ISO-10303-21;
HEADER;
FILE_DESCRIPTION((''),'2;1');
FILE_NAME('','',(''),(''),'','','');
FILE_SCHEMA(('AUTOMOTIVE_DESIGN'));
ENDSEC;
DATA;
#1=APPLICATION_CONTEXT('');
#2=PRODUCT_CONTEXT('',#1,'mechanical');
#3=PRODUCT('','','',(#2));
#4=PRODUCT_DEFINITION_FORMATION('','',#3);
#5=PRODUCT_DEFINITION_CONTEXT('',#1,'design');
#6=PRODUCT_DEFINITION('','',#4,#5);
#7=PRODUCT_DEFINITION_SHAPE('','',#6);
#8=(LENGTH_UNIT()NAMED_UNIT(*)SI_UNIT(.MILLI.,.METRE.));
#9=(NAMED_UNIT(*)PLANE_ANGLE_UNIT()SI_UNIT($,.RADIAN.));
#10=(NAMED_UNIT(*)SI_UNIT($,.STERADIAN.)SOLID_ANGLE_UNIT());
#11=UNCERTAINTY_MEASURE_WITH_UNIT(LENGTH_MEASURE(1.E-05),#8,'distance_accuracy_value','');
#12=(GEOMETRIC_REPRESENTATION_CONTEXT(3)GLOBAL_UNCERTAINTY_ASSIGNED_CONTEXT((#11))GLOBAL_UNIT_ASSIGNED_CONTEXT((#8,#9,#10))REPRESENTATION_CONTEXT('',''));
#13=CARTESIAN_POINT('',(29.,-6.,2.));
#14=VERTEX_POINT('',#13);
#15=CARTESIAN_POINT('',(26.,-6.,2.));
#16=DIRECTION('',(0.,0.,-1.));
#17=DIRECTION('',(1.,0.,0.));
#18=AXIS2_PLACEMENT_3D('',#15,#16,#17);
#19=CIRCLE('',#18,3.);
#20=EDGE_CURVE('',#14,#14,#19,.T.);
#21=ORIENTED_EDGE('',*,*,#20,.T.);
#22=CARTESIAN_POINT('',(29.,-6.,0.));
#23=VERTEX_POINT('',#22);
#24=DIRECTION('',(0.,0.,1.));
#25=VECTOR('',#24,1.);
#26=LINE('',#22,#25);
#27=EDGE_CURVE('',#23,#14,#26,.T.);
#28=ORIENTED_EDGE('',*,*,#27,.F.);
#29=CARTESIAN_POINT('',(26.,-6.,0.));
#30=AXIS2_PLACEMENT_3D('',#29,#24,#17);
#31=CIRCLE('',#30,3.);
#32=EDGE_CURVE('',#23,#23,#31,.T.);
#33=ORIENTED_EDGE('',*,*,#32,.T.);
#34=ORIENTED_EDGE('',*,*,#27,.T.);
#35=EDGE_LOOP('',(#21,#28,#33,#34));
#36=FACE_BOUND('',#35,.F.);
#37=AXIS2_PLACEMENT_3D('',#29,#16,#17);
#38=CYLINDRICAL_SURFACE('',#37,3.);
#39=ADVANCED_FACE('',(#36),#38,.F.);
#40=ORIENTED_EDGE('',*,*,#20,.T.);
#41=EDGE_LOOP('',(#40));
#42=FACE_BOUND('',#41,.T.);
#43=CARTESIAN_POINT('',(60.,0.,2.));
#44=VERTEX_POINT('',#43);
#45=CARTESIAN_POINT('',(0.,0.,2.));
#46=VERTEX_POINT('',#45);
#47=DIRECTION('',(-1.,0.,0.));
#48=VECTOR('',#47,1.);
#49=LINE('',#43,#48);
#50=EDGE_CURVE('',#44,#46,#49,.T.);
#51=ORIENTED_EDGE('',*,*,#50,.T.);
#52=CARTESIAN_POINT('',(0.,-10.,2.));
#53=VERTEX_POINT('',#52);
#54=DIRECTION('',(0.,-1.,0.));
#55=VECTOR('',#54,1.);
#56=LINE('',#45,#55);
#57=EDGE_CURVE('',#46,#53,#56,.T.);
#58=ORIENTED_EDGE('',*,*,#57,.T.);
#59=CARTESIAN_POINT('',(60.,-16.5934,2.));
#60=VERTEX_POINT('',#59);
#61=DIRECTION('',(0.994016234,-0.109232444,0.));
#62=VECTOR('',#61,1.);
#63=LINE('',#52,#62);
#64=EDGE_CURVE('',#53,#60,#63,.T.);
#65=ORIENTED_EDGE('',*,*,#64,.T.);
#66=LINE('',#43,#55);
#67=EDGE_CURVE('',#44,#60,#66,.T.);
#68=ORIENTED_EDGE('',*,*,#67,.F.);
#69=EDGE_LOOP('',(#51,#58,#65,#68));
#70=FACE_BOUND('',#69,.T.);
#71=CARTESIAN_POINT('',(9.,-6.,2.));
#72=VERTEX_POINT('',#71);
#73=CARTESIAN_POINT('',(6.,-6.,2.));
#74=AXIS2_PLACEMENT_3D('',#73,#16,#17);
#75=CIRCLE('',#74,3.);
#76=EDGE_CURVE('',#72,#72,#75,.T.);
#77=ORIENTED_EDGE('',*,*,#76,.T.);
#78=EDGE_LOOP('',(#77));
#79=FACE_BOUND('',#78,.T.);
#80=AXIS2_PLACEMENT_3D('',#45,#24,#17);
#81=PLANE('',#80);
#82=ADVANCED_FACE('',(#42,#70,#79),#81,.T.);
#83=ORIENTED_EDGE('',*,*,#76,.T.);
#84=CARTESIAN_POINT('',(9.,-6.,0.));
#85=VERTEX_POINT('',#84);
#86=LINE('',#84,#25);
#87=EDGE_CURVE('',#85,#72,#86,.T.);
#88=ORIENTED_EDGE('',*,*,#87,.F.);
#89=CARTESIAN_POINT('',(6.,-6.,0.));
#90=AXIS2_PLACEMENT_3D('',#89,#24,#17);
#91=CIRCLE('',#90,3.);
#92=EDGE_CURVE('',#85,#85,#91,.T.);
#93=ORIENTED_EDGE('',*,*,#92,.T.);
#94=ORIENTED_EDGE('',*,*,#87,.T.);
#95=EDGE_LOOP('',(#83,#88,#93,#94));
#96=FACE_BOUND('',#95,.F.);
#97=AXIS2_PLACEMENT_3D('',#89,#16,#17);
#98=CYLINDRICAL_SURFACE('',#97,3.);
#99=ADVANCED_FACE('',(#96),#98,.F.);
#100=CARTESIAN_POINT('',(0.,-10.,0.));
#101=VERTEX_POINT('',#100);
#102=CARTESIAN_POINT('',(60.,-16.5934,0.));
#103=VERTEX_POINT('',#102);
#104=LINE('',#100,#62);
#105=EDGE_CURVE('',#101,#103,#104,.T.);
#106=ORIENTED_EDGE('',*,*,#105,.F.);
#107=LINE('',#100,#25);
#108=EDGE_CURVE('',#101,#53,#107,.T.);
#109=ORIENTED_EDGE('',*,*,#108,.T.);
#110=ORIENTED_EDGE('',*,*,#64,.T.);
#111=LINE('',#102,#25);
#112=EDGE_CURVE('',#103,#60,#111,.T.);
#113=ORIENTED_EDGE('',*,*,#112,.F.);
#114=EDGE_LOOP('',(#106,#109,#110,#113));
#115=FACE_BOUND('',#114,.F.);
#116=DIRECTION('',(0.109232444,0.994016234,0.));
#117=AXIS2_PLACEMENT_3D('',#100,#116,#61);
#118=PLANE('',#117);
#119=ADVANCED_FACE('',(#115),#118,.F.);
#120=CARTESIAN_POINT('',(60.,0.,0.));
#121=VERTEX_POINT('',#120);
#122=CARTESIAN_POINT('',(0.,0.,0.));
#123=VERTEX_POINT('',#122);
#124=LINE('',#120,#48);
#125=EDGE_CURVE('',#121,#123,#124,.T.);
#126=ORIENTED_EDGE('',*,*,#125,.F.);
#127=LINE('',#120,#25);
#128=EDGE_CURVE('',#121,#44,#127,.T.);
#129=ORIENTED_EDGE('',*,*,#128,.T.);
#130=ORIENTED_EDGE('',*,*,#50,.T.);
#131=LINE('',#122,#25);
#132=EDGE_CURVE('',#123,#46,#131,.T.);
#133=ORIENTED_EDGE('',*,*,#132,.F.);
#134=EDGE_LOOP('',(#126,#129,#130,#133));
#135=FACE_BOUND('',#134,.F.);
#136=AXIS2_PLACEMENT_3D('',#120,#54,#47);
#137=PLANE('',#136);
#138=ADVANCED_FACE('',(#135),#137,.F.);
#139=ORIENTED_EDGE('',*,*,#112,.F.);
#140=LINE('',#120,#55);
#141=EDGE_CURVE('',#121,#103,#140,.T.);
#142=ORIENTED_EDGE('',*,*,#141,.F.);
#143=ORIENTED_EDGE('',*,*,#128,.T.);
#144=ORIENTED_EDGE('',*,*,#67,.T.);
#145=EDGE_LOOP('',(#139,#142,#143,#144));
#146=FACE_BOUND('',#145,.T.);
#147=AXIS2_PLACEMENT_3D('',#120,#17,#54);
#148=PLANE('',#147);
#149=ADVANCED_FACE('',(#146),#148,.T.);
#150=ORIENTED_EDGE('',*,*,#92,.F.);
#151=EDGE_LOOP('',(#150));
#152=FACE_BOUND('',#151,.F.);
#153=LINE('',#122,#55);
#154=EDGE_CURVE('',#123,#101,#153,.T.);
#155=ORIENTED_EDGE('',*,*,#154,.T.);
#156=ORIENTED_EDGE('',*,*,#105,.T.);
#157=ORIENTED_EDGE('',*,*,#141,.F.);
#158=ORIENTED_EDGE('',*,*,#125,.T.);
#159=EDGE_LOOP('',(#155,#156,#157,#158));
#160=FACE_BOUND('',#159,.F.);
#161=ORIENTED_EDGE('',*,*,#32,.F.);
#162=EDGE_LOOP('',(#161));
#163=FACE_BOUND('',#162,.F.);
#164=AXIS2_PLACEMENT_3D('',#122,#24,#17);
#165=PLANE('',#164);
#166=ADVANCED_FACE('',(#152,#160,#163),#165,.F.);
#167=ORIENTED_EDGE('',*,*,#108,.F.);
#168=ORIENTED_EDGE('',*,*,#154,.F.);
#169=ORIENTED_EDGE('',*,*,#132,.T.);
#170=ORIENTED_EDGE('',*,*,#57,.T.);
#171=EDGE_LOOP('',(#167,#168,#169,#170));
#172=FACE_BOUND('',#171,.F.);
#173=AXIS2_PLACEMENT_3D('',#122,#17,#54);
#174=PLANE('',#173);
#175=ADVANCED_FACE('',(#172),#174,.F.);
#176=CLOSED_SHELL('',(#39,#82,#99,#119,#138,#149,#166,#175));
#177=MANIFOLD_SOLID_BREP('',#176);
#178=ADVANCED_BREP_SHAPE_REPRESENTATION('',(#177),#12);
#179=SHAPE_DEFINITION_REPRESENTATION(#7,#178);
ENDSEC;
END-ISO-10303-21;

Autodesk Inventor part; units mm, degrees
ref_plane "YZ Plane" through (0, 0, 0) normal (1, 0, 0) x (0, 1, 0)
ref_plane "XZ Plane" through (0, 0, 0) normal (0, 1, 0) x (-1, 0, 0)
ref_plane "XY Plane" through (0, 0, 0) normal (0, 0, 1) x (1, 0, 0)
sketch "Sketch1" plane through (0, 0, 0) normal (0, 0, 1) x (1, 0, 0)
  line L0 (60, 0) -> (60, -16.5934)
  line L1 (60, 0) -> (0, 0)
  line L2 (0, 0) -> (0, -10)
  line L3 (0, -10) -> (60, -16.5934)
  dimension "d43" = 10
  dimension "d44" = 60
  dimension "d51" = 6.271
extrude "Plate1" add sketch "Sketch1" along normal blind 2
sketch "Sketch6" plane through (0, 0, 0) normal (0, 0, 1) x (1, 0, 0)
  line L0 (0, -10) -> (60, -16.5934) projected
  line L1 (0, 0) -> (0, -10) projected
  line L2 (60, 0) -> (0, 0) projected
  line L3 (60, -16.5934) -> (60, 0) projected
  circle A0 centre (6, -6) radius 3
  circle A1 centre (26, -6) radius 3
  dimension "d45" = 6
  dimension "d46" = 6
  dimension "d47" = 6
  dimension "d48" = 20
sketch "Sketch2" plane through (0, 0, 0) normal (0, 0, -1) x (-1, 0, 0)
  line L0 (-179.9406, -4.4713) -> (20.0594, -4.4713) construction
  line L1 (20.0594, -4.4713) -> (20.0594, -24.4713) construction
  line L2 (20.0594, -24.4713) -> (-179.9406, -24.4713) construction
  line L3 (-179.9406, -24.4713) -> (-179.9406, -4.4713) construction
  point P0 (0, 0)
  point P1 (-251, -525)
  dimension "d6" = 200
  dimension "d9" = 20
mark "Mark1"
extrude "Extrusion1" cut sketch "Sketch6" along normal through all contours A0 | A1
equation "\"d2\" = Thickness"
equation "\"BendReliefWidth\" = Thickness"
equation "\"BendReliefDepth\" = 0.5 * Thickness"
equation "\"CornerReliefSize\" = 4 * Thickness"
equation "\"MinimumRemnant\" = 2 * Thickness"
equation "\"TransitionRadius\" = BendRadius"
equation "\"JacobiRadiusSize\" = BendRadius"
equation "\"GapSize\" = Thickness"
equation "\"Thickness\" = 2"
equation "\"BendRadius\" = 2.75"
properties part number "TRM 030 star conrtforce plate" material "AISI 304"
